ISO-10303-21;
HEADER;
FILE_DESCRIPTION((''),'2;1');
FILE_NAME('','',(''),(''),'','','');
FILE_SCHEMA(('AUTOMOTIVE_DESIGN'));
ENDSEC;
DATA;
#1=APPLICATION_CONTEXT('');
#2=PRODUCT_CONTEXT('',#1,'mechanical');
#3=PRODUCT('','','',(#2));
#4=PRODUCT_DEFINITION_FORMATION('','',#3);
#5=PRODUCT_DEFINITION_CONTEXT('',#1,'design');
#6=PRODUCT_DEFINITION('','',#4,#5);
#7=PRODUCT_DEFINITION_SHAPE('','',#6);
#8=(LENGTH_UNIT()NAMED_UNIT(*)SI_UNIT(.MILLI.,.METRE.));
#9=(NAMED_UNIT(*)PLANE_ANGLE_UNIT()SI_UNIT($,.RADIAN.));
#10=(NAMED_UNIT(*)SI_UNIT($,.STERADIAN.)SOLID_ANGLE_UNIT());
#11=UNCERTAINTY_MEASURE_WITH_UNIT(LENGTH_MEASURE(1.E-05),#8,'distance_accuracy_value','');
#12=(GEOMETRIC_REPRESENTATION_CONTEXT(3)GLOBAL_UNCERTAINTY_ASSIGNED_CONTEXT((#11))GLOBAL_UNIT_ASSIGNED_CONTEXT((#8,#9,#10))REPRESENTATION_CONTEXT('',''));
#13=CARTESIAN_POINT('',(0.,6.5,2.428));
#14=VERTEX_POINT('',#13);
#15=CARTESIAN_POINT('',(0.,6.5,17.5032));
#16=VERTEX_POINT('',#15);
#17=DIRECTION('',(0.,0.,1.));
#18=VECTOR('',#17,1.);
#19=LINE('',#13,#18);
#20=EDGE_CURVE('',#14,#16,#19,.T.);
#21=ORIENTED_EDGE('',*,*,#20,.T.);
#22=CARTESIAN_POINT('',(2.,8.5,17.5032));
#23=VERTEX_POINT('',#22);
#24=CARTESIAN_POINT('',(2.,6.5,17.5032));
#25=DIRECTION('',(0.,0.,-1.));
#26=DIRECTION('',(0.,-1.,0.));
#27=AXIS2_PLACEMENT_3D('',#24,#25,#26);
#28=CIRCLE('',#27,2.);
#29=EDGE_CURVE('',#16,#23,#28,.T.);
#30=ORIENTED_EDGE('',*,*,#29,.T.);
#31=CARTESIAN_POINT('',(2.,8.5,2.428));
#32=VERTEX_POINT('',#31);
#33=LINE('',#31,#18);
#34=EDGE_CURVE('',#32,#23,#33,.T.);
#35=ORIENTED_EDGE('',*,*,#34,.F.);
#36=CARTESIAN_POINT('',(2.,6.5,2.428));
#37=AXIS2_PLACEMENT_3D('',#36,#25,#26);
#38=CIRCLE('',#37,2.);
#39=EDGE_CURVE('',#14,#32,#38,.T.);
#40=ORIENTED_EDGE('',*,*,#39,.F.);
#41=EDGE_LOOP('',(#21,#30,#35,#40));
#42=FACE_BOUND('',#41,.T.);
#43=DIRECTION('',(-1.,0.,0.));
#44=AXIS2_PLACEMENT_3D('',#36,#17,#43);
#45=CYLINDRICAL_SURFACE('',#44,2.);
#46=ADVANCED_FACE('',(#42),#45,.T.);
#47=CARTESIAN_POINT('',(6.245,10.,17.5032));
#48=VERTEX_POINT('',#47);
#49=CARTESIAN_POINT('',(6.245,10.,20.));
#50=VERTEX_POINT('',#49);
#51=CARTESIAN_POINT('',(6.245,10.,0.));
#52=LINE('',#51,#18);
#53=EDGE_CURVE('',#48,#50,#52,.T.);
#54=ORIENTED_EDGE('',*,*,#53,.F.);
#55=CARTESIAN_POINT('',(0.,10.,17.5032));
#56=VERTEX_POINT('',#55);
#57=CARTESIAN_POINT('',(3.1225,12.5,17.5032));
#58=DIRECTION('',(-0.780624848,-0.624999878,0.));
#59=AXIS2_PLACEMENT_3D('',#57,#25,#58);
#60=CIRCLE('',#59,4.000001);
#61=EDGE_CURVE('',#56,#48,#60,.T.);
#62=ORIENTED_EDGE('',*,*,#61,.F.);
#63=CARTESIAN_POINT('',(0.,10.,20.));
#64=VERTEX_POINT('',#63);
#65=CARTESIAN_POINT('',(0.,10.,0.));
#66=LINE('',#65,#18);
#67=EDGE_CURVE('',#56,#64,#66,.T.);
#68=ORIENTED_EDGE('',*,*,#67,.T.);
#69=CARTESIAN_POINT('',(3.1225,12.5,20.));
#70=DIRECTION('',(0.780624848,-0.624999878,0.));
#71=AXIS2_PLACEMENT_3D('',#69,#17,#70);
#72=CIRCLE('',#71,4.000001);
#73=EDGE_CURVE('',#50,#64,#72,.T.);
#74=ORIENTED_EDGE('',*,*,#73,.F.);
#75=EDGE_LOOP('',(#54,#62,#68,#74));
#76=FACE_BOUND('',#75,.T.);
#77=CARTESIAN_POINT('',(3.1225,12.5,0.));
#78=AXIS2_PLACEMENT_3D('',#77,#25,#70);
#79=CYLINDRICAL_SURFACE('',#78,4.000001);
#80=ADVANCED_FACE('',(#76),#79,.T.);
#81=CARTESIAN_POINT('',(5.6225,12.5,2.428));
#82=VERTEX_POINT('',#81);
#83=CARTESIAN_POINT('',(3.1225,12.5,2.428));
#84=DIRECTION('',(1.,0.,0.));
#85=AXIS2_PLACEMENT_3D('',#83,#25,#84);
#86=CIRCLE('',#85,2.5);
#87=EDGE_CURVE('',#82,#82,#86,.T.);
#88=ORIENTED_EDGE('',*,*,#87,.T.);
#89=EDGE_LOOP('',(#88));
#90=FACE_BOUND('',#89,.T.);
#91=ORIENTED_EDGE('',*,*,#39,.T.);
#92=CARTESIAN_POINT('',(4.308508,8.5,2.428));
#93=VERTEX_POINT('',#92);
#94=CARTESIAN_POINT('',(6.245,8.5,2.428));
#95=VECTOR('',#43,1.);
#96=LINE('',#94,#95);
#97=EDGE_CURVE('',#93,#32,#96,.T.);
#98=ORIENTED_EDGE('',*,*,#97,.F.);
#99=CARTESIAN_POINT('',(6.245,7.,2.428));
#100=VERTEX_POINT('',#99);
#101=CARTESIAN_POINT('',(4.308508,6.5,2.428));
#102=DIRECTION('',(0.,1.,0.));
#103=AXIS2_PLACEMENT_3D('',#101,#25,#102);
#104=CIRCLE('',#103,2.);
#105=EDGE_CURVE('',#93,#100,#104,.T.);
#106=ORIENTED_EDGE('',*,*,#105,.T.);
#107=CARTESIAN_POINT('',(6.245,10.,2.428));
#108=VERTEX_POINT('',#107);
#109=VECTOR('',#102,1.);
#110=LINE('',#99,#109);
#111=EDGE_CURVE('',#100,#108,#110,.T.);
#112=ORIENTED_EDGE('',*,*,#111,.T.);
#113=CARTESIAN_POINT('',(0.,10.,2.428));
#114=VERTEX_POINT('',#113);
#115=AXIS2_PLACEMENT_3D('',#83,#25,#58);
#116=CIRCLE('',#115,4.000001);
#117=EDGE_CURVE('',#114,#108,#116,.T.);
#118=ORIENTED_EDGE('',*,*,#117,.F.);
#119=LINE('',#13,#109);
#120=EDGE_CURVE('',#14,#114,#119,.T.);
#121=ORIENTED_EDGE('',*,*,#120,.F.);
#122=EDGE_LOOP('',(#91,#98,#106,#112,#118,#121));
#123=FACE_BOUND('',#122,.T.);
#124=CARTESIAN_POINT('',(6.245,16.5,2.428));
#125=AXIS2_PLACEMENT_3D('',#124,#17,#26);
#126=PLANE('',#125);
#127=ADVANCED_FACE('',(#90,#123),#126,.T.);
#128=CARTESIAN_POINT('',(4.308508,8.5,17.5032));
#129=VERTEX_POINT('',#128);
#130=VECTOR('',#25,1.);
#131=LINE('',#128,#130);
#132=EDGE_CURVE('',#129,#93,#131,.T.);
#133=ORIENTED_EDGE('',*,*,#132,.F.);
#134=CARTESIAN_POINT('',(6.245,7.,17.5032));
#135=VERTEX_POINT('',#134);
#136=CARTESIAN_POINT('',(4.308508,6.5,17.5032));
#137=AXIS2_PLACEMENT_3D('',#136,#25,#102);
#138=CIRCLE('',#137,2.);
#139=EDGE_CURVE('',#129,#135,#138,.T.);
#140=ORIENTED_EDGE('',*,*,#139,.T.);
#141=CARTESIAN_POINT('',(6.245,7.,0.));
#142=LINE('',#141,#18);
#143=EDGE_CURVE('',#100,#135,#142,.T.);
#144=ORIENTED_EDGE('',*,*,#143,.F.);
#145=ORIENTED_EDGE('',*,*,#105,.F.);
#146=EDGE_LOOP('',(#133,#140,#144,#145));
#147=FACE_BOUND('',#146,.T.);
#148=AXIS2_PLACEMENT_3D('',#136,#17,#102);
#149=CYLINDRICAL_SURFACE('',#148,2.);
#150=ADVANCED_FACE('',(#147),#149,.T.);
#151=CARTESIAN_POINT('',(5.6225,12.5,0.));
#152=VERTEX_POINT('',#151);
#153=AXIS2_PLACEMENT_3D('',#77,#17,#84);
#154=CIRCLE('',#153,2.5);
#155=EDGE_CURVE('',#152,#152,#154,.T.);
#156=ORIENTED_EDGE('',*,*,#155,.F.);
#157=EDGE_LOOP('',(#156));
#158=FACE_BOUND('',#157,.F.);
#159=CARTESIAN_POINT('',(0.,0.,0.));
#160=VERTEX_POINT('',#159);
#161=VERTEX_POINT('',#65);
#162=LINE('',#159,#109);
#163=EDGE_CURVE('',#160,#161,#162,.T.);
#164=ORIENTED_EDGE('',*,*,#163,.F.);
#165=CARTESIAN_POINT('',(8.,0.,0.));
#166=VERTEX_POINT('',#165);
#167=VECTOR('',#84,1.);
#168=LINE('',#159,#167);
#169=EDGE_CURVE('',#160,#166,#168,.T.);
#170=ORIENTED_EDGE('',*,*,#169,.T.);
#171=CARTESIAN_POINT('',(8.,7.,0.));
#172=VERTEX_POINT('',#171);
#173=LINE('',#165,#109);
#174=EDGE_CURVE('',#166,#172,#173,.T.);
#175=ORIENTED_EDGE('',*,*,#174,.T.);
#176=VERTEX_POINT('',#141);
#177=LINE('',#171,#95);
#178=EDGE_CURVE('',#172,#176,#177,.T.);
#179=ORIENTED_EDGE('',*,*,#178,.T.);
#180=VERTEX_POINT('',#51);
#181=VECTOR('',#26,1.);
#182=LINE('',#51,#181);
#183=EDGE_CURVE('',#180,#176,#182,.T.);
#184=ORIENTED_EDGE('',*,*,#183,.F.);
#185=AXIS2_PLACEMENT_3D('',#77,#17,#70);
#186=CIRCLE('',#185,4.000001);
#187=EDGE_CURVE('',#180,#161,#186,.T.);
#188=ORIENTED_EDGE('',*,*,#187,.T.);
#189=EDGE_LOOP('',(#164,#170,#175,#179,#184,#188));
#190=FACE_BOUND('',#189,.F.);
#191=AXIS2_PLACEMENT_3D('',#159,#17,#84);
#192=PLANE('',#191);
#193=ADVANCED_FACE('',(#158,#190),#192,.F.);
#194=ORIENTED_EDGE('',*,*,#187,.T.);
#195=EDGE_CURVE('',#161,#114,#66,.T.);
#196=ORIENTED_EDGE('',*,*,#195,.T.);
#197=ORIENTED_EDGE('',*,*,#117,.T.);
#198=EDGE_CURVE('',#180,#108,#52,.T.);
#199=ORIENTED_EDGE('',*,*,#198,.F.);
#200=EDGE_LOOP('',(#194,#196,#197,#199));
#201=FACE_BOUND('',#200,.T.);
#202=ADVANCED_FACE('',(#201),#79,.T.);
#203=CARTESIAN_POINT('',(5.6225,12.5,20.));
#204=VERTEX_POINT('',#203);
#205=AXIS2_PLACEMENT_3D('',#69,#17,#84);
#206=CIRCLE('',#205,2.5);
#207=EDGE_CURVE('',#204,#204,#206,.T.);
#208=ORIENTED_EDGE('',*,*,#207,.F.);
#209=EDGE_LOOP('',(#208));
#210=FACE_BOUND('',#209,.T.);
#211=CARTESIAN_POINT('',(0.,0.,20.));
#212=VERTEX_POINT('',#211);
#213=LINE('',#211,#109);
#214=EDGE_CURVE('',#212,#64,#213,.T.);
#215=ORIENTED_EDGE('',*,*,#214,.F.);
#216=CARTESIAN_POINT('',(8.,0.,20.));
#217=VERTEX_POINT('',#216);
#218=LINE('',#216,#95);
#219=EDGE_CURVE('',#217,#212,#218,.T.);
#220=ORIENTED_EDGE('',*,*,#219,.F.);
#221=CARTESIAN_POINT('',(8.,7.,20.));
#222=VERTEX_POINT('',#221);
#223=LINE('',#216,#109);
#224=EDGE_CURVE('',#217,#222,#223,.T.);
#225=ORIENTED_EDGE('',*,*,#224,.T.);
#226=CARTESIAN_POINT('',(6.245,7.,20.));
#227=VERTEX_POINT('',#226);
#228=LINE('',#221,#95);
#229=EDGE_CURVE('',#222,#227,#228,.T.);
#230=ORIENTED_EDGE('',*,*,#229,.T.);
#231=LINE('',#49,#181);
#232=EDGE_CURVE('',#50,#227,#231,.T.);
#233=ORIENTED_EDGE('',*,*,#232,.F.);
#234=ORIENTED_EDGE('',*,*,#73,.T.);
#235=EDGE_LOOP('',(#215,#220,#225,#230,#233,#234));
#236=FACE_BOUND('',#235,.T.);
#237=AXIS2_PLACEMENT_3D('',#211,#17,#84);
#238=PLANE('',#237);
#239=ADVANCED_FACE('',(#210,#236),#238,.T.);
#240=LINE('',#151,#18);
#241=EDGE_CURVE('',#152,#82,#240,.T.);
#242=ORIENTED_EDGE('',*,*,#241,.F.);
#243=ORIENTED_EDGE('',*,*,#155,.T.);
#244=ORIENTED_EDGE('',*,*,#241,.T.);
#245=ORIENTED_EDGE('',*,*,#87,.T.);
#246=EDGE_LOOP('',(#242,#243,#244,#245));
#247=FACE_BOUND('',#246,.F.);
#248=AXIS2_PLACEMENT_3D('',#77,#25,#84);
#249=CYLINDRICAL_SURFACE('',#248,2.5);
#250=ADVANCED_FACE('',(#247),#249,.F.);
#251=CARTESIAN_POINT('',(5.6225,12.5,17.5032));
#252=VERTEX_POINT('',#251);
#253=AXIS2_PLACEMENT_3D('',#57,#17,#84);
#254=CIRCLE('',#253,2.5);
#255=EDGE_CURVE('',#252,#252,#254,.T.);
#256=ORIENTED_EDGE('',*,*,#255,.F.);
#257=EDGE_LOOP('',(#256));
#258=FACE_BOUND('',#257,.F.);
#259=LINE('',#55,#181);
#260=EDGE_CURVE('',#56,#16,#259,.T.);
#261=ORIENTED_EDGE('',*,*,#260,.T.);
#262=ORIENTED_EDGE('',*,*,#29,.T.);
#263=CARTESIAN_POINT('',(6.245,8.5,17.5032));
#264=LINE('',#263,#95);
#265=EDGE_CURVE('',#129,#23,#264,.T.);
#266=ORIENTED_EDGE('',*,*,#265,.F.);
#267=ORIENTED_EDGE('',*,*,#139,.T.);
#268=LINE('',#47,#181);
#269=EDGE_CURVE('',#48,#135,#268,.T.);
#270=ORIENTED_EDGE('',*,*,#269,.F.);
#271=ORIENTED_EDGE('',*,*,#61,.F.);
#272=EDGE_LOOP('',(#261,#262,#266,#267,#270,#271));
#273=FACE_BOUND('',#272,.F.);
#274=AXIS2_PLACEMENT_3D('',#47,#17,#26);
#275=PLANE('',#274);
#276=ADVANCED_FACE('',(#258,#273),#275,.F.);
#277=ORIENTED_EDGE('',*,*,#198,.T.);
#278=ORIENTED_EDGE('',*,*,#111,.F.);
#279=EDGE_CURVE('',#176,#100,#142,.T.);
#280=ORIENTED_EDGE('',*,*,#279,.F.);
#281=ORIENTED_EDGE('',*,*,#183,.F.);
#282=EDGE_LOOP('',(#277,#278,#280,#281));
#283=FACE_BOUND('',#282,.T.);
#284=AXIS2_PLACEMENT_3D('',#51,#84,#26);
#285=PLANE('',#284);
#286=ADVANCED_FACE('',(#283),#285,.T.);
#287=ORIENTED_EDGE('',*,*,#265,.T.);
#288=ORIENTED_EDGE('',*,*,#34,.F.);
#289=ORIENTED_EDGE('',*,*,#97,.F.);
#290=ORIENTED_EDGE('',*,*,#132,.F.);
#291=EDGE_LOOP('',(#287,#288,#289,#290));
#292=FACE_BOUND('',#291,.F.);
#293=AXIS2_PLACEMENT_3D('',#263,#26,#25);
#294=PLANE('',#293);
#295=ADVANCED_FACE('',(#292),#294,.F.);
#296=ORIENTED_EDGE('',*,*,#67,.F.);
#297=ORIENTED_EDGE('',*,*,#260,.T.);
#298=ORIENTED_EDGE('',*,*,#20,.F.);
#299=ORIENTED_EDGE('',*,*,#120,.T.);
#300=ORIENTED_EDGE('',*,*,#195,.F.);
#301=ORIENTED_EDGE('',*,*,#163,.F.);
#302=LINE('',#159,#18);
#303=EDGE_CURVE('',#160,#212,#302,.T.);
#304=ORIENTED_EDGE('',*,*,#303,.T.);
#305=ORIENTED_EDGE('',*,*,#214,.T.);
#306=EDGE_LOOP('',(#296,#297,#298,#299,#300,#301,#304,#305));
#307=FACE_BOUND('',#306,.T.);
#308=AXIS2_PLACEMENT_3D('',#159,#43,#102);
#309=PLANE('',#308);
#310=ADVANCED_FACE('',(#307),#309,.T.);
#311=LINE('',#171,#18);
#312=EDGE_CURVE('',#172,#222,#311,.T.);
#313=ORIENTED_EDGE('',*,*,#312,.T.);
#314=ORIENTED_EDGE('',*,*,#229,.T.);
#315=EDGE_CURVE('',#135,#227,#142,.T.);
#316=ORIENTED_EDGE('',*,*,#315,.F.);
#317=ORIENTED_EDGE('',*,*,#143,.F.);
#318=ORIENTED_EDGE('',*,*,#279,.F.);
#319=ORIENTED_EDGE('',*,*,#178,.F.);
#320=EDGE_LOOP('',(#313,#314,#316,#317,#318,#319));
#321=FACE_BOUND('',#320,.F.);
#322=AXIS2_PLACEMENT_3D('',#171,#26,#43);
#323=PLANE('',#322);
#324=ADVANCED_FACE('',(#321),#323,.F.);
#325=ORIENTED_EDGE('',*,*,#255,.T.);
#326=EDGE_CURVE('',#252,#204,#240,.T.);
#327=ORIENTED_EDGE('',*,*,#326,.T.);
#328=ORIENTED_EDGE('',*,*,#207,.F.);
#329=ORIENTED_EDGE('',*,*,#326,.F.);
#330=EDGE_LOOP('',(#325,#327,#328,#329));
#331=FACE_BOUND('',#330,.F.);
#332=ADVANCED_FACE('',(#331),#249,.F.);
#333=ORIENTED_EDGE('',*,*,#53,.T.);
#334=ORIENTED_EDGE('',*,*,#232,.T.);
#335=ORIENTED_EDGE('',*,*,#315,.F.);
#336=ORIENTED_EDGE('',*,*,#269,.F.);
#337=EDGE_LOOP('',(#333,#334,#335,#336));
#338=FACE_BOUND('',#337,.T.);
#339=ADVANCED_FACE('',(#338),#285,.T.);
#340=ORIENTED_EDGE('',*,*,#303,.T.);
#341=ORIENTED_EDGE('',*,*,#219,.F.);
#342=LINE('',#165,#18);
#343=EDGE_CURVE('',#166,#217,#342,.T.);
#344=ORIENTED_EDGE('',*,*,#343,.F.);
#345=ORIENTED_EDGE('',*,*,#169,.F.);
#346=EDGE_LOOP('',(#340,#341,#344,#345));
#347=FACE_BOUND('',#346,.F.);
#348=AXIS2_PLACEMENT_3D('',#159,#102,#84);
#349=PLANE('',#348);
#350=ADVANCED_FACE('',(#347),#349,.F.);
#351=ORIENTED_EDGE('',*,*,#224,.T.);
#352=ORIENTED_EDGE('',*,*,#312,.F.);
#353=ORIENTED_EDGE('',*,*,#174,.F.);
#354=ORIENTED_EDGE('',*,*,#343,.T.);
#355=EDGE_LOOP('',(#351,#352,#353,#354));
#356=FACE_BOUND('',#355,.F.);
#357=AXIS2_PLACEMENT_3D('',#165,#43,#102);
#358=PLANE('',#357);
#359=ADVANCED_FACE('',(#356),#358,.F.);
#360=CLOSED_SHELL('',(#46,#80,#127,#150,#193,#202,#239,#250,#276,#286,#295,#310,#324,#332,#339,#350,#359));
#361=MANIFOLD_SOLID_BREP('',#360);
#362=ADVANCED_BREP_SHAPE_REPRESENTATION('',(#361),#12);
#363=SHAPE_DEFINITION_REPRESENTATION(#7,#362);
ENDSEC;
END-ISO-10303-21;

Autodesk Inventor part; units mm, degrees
ref_plane "YZ Plane" through (0, 0, 0) normal (1, 0, 0) x (0, 1, 0)
ref_plane "XZ Plane" through (0, 0, 0) normal (0, 1, 0) x (-1, 0, 0)
ref_plane "XY Plane" through (0, 0, 0) normal (0, 0, 1) x (1, 0, 0)
sketch "Sketch1" plane through (0, 0, 0) normal (0, 0, 1) x (1, 0, 0)
  line L0 (0, 0) -> (0, 10)
  line L1 (6.245, 10) -> (6.245, 7)
  circle A0 centre (3.1225, 12.5) radius 2.5
  arc A1 (6.245, 10) -> (0, 10) centre (3.1225, 12.5) ccw
  line L2 (6, 10) -> (0, 10) construction
  line L3 (8, 0) -> (8, 7)
  line L4 (8, 7) -> (6.245, 7)
  line L5 (0, 0) -> (8, 0)
  dimension "d2" = 8
  dimension "d3" = 5
  dimension "d5" = 10
  dimension "d17" = 7
  dimension "d18" = 3
  dimension "d19" = 8
extrude "Extrusion1" add sketch "Sketch1" along normal blind 20
sketch "Sketch2" plane through (0, 0, 0) normal (-1, 0, 0) x (0, 0, 1)
  point P0 (0, 0)
sketch "Sketch3" plane through (6.245, 0, 0) normal (1, 0, 0) x (0, 0, -1)
  line L0 (0, 10) -> (-20, 10) projected
  line L1 (-17.5032, 10) -> (-17.5032, 16.6156)
  line L2 (-17.5032, 16.6156) -> (-2.428, 16.6156)
  line L3 (0, 16.5) -> (-20, 16.5) projected
  line L4 (-2.428, 16.6156) -> (-2.428, 10)
  line L5 (-2.428, 10) -> (-17.5032, 10)
  point P0 (0, 0)
extrude "Extrusion2" cut sketch "Sketch3" along normal mid plane 20
sketch "Sketch4" plane through (6.245, 0, 0) normal (1, 0, 0) x (0, 0, -1)
  line L0 (0, 0) -> (-20, 0) projected
  line L1 (0, 0) -> (0, 10) projected
  line L2 (-20, 0) -> (0, 0)
  line L3 (0, 0) -> (0, 6.4437)
  line L4 (0, 6.4437) -> (-20, 6.4437)
  line L5 (-20, 6.4437) -> (-20, 0)
extrude "Extrusion3" add sketch "Sketch4" along normal blind 0.1
sketch "Sketch5" plane through (6.245, 10, 17.5032) normal (1, 0, 0) x (0, 0, -1)
  line L0 (0, 6.5) -> (0, 0) projected
  line L1 (0, 6.5) -> (0, -1.5)
  line L2 (0, -1.5) -> (15.0752, -1.5)
  line L3 (15.0752, 6.5) -> (15.0752, -1.5)
  line L4 (0, 6.5) -> (15.0752, 6.5)
  point P0 (17.5032, -10)
  dimension "d12" = 8
  dimension "d13" = 15.0752
extrude "Extrusion4" cut sketch "Sketch5" against normal blind 10
fillet "Fillet1" radius 2 1 edges at (6.245, 8.5, 9.9656)
fillet "Fillet2" radius 2 1 edges at (0, 8.5, 9.9656)
sketch "Sketch6" plane through (8, 0, 0) normal (1, 0, 0) x (0, 0, -1)
  line L0 (-2.428, 7) -> (-2.428, 10) projected
  line L1 (-2.428, 10) -> (-17.5032, 10)
  line L2 (-17.5032, 18.1901) -> (-2.428, 18.1901)
  line L3 (0, 10) -> (-2.428, 10) projected
  line L4 (-2.428, 18.1901) -> (-2.428, 10)
  line L5 (-17.5032, 10) -> (-17.5032, 10) projected
  line L6 (-17.5032, 18.1901) -> (-17.5032, 10)
  point P0 (0, 0)
  point P1 (-17.5032, 16.5)
extrude "Extrusion5" cut sketch "Sketch6" against normal blind 10
properties part number "HingeBase1"
